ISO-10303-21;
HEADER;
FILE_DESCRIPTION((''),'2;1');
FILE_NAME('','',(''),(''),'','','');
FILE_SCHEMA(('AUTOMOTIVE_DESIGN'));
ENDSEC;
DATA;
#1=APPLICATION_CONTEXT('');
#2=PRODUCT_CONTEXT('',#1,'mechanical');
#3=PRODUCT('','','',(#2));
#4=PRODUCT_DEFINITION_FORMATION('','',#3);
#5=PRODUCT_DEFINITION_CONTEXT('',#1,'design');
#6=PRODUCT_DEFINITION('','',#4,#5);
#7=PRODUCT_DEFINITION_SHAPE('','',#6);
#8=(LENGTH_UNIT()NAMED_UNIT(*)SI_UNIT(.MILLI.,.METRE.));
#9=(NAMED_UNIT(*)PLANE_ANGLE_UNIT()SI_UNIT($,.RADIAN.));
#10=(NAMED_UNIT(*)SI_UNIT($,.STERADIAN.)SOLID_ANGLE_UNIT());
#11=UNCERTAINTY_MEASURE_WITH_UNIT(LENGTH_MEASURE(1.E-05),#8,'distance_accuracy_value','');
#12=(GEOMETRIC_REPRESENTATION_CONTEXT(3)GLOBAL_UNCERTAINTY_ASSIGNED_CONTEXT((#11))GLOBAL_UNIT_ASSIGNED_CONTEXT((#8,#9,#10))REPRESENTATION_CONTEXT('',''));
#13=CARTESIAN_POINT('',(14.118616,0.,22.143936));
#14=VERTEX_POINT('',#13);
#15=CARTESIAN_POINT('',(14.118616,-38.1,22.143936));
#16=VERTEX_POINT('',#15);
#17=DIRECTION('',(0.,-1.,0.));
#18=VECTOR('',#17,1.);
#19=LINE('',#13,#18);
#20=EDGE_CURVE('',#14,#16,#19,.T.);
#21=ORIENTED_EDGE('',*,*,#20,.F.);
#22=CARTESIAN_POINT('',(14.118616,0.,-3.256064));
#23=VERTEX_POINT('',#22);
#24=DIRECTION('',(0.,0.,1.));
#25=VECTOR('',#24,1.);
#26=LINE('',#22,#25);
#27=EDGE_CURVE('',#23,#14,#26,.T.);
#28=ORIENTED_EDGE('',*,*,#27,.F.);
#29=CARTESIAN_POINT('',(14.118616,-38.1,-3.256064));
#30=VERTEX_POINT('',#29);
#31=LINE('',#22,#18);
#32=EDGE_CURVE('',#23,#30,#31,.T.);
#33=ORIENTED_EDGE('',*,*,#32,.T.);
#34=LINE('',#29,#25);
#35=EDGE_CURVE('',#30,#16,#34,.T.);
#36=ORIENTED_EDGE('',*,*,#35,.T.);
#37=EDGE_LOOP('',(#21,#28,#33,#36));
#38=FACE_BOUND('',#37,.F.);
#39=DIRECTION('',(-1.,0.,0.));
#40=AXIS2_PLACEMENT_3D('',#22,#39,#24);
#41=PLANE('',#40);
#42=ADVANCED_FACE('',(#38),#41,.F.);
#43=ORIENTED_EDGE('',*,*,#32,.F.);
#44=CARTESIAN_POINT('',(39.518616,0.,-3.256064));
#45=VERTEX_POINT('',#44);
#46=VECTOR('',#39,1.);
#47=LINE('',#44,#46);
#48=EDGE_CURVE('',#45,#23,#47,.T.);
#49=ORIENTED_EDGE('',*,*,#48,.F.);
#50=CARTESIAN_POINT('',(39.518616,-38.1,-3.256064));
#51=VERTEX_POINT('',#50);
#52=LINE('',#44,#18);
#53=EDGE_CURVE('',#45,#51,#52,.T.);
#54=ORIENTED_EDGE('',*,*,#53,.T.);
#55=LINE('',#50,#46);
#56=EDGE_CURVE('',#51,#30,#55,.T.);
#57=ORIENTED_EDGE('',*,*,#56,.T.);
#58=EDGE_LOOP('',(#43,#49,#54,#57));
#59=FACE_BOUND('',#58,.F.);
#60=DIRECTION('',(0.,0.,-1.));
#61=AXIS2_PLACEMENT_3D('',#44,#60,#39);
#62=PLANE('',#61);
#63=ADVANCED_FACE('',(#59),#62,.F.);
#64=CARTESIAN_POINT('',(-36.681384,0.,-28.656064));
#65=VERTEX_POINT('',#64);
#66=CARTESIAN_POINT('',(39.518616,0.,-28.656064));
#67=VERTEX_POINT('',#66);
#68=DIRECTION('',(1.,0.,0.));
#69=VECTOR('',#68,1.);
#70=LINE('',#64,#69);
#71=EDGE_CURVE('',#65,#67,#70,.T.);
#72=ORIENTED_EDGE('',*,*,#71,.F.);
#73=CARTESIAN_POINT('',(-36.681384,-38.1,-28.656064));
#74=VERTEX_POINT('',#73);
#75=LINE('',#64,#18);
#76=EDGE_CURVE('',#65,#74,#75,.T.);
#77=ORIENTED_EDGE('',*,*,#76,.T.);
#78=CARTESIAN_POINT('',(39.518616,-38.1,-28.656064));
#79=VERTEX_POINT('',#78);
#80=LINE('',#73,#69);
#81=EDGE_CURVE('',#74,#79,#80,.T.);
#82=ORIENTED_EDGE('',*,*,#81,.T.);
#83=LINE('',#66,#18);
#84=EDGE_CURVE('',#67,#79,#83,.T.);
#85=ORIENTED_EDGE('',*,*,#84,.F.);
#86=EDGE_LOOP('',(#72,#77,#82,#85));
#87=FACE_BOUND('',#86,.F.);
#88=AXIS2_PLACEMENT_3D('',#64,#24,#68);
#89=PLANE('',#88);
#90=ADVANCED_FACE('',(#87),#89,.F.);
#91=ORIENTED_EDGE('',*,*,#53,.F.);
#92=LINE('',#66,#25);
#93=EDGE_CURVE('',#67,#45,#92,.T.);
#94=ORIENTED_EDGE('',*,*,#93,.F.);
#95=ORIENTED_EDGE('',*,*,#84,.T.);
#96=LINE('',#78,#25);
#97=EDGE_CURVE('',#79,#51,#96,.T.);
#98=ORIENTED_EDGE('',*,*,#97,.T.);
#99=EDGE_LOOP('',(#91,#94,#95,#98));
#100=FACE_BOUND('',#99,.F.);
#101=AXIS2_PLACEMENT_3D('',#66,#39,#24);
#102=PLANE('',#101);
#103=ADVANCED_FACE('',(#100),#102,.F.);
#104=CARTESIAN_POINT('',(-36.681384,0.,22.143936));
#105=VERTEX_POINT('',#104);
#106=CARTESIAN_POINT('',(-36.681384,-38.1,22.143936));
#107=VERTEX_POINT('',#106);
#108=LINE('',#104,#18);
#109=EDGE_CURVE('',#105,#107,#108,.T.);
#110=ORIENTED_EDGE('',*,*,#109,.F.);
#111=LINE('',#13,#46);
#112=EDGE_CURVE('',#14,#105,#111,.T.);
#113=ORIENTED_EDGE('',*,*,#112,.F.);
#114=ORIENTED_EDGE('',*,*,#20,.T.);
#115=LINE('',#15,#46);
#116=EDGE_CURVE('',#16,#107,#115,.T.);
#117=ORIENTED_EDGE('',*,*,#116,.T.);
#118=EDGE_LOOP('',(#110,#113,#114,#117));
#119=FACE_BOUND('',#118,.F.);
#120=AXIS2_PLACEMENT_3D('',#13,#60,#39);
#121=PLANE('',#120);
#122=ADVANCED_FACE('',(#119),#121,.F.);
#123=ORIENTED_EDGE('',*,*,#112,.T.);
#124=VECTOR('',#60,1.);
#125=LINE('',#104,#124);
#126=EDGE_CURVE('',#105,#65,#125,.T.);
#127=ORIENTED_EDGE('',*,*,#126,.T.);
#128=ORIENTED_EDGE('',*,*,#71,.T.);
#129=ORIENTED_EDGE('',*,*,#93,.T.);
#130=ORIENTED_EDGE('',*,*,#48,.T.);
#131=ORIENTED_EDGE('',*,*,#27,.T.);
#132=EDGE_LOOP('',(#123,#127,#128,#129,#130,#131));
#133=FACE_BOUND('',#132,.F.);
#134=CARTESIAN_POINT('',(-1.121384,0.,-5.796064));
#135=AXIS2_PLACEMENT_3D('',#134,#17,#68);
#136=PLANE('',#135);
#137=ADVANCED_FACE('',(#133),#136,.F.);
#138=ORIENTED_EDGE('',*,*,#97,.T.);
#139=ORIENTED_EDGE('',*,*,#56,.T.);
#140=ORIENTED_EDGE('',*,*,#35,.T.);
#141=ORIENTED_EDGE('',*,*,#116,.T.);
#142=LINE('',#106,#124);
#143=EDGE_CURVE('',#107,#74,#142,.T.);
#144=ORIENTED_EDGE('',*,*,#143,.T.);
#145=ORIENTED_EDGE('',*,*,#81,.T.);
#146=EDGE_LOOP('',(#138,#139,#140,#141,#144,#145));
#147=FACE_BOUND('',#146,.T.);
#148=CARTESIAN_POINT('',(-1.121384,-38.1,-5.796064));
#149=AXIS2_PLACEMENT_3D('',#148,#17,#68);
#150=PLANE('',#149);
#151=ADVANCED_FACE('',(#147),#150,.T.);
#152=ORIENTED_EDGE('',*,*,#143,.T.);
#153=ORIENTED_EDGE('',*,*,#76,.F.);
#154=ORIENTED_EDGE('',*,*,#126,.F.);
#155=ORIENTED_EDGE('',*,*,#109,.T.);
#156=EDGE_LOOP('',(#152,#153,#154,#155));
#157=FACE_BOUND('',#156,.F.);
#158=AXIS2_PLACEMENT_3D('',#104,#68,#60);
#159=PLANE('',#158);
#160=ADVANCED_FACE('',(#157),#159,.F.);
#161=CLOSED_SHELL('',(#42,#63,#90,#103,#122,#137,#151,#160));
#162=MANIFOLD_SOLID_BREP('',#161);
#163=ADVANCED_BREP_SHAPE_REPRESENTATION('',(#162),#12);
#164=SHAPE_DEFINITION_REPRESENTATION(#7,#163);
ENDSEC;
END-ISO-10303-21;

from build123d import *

# Parameters (mm, degrees)
F7_DEPTH = 38.1


# Not quite as in the source:
# - a feature of the source that left no trace in its solid (it failed there, or was rolled back) is left out


with BuildPart() as f7:
    # F6 (on Front) → F7 (new body)
    with BuildSketch(Plane.XZ):
        Polygon((-36.6813843086, 22.1439363986), (-36.6813843086, -28.6560636014), (39.5186156914, -28.6560636014), (39.5186156914, -3.2560636014), (14.1186156914, -3.2560636014), (14.1186156914, 22.1439363986), align=None)
    extrude(amount=F7_DEPTH)


solid = f7.part
